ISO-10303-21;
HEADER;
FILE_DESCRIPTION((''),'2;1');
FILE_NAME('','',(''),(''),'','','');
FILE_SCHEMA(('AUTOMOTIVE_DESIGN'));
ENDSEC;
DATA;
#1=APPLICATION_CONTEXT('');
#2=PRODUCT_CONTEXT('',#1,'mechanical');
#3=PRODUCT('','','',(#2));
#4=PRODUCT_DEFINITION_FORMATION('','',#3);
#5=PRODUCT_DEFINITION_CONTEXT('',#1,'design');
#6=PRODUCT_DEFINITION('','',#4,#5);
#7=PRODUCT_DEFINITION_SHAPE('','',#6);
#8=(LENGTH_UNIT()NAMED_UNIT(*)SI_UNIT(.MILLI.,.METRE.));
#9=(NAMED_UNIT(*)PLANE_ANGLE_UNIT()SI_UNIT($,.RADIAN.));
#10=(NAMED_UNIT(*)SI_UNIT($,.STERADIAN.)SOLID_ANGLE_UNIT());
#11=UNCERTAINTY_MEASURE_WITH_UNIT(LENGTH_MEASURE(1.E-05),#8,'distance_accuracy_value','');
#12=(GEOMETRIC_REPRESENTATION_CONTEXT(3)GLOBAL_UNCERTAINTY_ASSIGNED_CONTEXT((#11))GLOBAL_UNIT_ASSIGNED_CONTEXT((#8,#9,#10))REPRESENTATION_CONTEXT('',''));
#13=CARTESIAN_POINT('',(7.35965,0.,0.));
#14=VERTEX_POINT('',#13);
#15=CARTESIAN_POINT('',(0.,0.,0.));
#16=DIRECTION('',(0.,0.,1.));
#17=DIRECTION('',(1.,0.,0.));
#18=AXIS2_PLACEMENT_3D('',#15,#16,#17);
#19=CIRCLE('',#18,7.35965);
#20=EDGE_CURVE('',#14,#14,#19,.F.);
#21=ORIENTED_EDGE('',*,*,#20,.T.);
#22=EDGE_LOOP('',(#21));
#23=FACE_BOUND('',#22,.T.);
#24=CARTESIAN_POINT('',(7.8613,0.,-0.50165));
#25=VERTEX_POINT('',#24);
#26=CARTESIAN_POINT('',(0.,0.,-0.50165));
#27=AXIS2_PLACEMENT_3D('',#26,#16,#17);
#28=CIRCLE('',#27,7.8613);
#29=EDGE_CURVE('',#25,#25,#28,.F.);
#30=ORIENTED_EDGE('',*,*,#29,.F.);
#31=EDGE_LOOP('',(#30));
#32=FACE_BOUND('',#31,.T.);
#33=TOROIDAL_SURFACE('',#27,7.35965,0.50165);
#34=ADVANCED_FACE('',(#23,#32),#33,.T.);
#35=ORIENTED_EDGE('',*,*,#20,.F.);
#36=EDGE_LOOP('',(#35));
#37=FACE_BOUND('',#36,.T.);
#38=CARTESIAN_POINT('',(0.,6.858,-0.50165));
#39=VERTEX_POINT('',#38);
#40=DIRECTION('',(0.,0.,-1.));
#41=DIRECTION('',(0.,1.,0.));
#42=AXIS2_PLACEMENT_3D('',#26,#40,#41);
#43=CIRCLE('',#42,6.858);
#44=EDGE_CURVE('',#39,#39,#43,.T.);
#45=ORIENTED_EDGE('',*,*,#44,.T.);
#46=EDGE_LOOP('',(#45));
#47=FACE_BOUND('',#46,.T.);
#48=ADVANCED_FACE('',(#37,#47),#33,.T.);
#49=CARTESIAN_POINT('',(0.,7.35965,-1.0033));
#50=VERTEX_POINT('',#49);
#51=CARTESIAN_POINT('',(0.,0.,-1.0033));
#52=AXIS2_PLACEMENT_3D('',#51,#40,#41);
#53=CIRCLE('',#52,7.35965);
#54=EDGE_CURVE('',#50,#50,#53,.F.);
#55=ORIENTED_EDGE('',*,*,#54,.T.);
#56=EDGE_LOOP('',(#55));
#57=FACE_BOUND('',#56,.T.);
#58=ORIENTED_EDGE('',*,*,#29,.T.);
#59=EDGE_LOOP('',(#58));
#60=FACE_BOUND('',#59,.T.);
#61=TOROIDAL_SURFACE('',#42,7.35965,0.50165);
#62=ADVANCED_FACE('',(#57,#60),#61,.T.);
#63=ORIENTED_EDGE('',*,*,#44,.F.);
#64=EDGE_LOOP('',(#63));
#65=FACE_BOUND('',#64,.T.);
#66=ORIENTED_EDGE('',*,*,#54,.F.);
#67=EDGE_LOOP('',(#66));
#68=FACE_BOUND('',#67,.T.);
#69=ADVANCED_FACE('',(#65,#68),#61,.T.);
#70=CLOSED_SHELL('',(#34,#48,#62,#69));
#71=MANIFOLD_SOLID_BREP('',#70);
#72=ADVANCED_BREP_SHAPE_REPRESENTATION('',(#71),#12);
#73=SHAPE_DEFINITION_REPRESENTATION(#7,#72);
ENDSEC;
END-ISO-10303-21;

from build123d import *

# Parameters (mm, degrees)
SKETCH1_R               = 7.8613
SKETCH1_R_2             = 6.858
BOSS_EXTRUDE1_DEPTH     = 2.0066
CUT_EXTRUDE1_DEPTH      = 12.297190754
CUT_EXTRUDE1_DEPTH_BACK = 12.297190754
SKETCH2_W               = 1.0033
SKETCH2_H               = 15.7226
FILLET1_R               = 0.50165
FILLET2_R               = 0.50165


with BuildPart() as part:
    # Sketch1 → Boss-Extrude1 (new body)
    with BuildSketch(Plane.XY):
        Circle(SKETCH1_R)
        Circle(SKETCH1_R_2, mode=Mode.SUBTRACT)
    extrude(amount=-BOSS_EXTRUDE1_DEPTH)

    # Sketch2 → Cut-Extrude1 (cut, two sides: drawn at the far end of the back side and taken through both)
    with BuildSketch(Plane(origin=(0, 0, 0), x_dir=(0, 0, -1), z_dir=(1, 0, 0)).offset(-CUT_EXTRUDE1_DEPTH_BACK)):
        with Locations((1.50495, 0)):
            Rectangle(SKETCH2_W, SKETCH2_H)
    extrude(amount=CUT_EXTRUDE1_DEPTH + CUT_EXTRUDE1_DEPTH_BACK, mode=Mode.SUBTRACT)

    # Fillet1
    fillet1_edges = [part.edges().sort_by_distance(p)[0] for p in [
        (-6.858, 0, -1.0033),
        (-7.8613, 0, 0),
        (-6.858, 0, 0),
    ]]
    fillet(fillet1_edges, radius=FILLET1_R - 0.0001)  # a hair under: the kernel refuses the full size

    # Fillet2
    fillet2_edges = [part.edges().sort_by_distance(p)[0] for p in [
        (-7.8613, 0, -1.0033),
    ]]
    fillet(fillet2_edges, radius=FILLET2_R)


solid = part.part
